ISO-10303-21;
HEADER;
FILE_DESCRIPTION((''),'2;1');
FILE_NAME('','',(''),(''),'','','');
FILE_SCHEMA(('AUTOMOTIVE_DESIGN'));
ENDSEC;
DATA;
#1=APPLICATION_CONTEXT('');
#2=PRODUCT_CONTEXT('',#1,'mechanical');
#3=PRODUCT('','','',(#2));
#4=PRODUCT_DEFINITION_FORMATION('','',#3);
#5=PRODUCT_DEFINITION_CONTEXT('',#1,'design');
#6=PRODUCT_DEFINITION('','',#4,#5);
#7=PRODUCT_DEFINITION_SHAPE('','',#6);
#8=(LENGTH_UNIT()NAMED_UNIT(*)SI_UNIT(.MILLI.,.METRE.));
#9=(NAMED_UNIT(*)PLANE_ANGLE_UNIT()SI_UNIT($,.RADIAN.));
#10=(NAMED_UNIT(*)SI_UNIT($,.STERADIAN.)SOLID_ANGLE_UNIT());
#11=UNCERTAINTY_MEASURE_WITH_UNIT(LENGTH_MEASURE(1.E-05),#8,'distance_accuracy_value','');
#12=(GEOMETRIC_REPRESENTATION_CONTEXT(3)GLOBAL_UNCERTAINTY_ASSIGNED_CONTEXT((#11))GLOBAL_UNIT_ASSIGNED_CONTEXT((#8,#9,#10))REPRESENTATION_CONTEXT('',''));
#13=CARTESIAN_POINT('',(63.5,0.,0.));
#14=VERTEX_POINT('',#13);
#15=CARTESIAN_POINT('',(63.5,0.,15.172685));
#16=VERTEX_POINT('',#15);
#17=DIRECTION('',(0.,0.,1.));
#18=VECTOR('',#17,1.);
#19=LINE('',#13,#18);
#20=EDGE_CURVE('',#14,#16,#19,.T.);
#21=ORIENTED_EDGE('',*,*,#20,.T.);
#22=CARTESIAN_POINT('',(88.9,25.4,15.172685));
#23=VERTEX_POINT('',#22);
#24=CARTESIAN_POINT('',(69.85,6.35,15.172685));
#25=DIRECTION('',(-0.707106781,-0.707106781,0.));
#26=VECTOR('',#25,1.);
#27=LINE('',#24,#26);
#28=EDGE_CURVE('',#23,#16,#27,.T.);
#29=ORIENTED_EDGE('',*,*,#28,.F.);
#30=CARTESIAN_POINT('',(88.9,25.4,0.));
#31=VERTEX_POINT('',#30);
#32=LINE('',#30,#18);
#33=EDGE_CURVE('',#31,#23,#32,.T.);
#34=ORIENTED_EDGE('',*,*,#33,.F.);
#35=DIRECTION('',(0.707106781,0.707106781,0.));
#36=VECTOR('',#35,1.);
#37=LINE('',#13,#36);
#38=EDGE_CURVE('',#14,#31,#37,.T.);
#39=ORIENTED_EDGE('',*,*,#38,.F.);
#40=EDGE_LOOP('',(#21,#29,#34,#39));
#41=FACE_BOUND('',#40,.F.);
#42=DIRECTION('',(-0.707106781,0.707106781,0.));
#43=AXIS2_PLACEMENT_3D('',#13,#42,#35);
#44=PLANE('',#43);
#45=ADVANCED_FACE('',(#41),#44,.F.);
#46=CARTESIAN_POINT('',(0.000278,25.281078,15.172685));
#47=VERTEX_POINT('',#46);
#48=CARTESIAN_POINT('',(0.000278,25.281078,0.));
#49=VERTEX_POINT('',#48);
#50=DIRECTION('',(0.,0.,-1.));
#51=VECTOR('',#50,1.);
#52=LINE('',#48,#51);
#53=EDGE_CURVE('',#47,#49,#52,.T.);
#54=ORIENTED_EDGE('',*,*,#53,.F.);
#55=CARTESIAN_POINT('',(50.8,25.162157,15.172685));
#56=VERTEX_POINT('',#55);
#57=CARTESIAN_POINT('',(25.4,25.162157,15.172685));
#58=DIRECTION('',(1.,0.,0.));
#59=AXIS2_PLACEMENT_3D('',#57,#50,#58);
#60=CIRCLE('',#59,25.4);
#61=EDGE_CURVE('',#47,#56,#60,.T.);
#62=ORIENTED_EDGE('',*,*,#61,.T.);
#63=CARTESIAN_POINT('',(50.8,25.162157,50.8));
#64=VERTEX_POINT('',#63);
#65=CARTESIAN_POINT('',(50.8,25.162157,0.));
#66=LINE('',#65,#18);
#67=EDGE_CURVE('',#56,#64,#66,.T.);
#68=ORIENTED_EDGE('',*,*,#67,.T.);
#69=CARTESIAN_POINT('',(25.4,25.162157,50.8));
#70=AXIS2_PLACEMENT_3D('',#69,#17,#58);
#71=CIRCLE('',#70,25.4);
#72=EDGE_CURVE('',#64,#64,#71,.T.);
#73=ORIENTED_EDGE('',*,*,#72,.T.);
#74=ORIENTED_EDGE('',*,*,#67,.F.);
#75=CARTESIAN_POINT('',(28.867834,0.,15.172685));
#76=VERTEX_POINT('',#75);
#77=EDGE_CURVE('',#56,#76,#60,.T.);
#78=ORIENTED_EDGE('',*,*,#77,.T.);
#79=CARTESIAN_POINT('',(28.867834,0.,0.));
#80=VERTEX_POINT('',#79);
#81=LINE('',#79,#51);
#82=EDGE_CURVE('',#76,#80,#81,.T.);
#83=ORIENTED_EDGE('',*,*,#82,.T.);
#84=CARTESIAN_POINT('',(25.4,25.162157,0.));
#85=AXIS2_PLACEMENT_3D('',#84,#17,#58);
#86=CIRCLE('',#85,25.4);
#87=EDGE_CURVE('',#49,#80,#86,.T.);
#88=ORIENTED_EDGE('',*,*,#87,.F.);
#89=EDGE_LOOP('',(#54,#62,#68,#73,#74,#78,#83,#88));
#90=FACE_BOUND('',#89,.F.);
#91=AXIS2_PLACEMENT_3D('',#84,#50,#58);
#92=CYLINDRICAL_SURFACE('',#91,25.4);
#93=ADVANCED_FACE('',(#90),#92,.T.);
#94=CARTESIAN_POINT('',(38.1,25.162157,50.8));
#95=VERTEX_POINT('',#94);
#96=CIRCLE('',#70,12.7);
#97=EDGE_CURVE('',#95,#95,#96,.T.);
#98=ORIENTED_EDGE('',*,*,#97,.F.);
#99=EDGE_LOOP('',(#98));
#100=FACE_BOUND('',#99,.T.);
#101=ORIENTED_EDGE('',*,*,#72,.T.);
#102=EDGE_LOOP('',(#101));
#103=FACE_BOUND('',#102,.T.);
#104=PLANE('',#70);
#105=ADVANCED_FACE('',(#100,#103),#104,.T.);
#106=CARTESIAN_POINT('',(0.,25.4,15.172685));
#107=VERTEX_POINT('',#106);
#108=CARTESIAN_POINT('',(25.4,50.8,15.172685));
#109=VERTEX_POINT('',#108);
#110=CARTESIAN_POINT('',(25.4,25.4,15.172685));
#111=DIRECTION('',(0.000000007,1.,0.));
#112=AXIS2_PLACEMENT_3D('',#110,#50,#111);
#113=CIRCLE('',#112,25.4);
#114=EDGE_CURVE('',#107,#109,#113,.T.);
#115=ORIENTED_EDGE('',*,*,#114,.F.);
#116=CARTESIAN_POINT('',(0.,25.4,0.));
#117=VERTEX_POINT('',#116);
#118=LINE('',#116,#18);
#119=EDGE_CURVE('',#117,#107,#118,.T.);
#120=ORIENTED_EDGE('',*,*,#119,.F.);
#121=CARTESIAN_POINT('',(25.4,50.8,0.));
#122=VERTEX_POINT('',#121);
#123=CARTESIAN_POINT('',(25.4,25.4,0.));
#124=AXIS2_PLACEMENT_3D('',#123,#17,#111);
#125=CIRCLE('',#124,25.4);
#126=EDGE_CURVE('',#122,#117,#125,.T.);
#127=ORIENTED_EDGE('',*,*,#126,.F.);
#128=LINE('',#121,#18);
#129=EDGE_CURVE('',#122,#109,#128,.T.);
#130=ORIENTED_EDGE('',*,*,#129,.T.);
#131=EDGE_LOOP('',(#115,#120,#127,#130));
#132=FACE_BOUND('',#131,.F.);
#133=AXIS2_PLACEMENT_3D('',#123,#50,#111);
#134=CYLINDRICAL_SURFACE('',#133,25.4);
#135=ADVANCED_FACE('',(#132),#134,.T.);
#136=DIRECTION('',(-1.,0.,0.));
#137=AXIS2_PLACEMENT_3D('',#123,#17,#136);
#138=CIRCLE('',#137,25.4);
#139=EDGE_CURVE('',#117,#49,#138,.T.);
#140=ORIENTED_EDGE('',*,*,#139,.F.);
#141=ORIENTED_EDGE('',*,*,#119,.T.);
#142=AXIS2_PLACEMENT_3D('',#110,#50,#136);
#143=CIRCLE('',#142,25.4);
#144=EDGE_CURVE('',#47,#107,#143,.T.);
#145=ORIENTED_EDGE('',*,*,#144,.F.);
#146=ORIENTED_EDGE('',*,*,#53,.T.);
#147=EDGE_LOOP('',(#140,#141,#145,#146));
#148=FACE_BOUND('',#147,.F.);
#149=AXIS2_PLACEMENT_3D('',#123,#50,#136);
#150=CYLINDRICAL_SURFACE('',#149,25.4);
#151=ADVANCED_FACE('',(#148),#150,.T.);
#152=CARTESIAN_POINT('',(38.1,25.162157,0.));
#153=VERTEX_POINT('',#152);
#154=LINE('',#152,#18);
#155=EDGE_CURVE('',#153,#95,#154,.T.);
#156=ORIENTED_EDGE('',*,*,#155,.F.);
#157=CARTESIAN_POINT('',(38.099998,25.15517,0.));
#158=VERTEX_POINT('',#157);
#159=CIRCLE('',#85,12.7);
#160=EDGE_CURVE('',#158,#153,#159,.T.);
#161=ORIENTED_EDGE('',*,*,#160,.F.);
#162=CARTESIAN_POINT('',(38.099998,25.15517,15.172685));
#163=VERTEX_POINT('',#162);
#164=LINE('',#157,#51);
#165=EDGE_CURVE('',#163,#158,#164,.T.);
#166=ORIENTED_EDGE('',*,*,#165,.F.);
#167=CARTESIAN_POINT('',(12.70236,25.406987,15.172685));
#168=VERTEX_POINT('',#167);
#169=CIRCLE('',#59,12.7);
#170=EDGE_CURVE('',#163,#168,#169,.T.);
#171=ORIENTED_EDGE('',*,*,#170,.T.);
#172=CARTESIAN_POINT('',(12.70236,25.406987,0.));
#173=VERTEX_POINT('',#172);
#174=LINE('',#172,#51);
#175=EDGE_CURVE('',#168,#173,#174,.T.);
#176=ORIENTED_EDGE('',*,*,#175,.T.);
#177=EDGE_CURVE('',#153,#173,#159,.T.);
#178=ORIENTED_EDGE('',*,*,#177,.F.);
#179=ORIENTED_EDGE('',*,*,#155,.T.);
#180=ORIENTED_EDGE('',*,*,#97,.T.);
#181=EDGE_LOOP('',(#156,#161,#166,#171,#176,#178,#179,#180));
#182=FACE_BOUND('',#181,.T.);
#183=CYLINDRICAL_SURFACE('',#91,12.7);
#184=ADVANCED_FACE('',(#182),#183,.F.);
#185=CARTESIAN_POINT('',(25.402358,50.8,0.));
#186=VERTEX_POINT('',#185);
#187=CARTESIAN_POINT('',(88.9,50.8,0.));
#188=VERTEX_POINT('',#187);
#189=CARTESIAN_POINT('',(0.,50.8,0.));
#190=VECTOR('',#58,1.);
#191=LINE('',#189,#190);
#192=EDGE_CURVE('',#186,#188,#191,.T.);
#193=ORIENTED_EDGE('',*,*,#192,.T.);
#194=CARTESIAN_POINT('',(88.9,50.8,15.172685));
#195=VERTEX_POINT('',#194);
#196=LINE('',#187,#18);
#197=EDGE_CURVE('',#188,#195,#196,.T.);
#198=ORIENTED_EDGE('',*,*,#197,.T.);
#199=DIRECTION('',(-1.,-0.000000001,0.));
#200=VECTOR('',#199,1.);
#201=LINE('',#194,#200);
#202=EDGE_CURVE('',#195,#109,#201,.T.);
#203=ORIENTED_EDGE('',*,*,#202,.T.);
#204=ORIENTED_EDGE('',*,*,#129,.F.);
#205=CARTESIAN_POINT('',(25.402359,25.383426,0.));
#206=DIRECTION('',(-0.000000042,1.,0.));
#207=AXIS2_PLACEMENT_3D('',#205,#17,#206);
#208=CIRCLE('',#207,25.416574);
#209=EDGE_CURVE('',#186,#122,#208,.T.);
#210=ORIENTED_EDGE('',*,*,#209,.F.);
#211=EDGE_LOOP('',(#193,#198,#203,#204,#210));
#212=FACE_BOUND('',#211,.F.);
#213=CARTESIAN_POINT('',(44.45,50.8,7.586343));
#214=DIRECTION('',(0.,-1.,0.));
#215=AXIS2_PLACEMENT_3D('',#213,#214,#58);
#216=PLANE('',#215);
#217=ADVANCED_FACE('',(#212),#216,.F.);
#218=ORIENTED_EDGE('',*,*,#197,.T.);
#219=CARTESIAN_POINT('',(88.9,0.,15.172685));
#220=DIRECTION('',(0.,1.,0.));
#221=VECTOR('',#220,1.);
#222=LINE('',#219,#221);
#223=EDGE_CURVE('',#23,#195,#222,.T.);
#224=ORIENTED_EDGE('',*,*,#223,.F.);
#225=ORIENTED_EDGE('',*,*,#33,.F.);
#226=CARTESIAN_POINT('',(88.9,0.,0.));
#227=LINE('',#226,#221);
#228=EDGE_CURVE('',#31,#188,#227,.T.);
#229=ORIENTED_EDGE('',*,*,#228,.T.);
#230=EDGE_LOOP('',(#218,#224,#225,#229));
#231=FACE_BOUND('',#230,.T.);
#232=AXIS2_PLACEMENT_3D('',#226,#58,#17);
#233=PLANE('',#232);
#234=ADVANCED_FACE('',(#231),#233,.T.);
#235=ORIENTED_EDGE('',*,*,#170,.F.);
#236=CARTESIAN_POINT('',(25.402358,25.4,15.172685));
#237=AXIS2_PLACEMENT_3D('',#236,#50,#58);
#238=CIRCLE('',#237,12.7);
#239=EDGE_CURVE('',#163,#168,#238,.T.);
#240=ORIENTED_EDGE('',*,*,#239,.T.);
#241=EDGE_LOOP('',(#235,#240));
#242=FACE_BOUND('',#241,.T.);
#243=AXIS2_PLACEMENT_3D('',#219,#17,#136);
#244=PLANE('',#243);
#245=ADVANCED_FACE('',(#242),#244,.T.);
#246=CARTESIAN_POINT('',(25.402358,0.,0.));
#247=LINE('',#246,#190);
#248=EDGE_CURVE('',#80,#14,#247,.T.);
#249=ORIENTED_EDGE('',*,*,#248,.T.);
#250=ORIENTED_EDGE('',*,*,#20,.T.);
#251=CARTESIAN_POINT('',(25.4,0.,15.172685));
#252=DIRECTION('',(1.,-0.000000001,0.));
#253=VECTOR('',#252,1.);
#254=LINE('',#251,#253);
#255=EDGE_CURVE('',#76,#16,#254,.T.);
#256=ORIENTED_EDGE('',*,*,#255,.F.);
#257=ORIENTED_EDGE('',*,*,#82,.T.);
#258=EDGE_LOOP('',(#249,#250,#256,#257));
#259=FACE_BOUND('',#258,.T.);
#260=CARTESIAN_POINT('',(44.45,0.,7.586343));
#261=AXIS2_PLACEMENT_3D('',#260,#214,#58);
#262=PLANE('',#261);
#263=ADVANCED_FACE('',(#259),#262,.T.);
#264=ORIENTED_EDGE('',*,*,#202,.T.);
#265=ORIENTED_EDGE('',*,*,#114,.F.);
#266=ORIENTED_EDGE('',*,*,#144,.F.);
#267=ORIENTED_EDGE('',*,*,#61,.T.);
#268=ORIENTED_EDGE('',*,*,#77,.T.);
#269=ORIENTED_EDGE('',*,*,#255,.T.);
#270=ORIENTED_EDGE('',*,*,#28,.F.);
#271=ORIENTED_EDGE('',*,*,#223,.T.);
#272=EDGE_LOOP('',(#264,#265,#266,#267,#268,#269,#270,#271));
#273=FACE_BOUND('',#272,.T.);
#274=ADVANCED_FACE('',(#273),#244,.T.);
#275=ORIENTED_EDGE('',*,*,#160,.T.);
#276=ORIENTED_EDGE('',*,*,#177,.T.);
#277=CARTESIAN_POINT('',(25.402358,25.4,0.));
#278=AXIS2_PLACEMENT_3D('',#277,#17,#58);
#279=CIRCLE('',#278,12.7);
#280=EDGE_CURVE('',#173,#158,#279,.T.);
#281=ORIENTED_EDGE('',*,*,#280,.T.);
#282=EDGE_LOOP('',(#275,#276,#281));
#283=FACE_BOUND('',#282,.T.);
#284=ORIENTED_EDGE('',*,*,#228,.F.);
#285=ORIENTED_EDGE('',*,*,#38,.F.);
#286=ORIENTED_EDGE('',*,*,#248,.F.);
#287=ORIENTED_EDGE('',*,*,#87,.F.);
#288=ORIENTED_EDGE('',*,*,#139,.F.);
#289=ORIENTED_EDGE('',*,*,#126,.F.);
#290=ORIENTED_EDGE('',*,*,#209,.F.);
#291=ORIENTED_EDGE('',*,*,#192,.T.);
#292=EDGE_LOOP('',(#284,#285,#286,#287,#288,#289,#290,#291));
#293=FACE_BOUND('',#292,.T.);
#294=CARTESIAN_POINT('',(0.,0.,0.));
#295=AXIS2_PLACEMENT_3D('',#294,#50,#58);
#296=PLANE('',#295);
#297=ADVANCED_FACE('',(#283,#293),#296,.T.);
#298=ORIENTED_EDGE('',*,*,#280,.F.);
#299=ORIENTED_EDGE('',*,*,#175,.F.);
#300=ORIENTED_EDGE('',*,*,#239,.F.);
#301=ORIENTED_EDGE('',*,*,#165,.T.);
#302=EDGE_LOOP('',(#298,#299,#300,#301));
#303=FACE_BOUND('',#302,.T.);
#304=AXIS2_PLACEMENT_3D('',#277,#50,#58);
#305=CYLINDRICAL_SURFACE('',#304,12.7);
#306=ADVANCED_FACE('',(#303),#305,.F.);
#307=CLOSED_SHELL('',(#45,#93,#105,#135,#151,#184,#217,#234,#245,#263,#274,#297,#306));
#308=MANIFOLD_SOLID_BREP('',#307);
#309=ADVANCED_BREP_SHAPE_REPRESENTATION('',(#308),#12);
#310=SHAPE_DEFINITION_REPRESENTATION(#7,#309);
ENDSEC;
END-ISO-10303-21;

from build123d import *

# Parameters (mm, degrees)
F2_DEPTH = 50.8
F1_R     = 12.7
F3_DEPTH = 50.8
F4_R     = 25.4
F4_R_2   = 12.7
F5_DEPTH = 50.8


# Not quite as in the source:
# - ends of sketch curves that miss each other by under 0.0002 mm in the source are joined


with BuildPart() as f2:
    # F0 (on Front) → F2 (new body)
    with BuildSketch(Plane.XZ):
        Polygon((0, 15.1726854965), (0, 0), (88.9, 0), (88.9, 15.1726854965), (38.1, 15.1726854965), align=None)
    extrude(amount=-F2_DEPTH)

    # F1 (on Top) → F3 (intersect)
    with BuildSketch(Plane.XY):
        with BuildLine():
            ThreePointArc((25.4023582082, 0), (43.3628704503, 7.4394877579), (50.8023582082, 25.4))
            ThreePointArc((50.8023582082, 25.4), (50.8017686493, 25.5730584989), (50.8, 25.7461089641))
            ThreePointArc((50.8, 25.7461089641), (43.2400827311, 43.4824661992), (25.4023582082, 50.8))
            ThreePointArc((25.4023582082, 50.8), (25.4011791041, 50.7999999726), (25.4, 50.7999998905))
            ThreePointArc((25.4, 50.7999998905), (0.0023582082, 25.4), (25.4, 1.095e-07))
            ThreePointArc((25.4, 1.095e-07), (25.4011791041, 2.74e-08), (25.4023582082, 0))
        make_face()
        with Locations((25.4023582082, 25.4)):
            Circle(F1_R, mode=Mode.SUBTRACT)
        with BuildLine():
            ThreePointArc((50.8, 25.7461089641), (50.8017686493, 25.5730584989), (50.8023582082, 25.4))
            ThreePointArc((50.8023582082, 25.4), (43.3628704503, 7.4394877579), (25.4023582082, 0))
            Line((25.4023582082, 0), (51.1508577362, 0))
            Line((51.1508577362, 0), (63.5, 0))
            Line((63.5, 0), (88.9, 25.4))
            Line((88.9, 25.4), (88.9, 50.8))
            Line((88.9, 50.8), (50.4585755345, 50.8))
            Line((50.4585755345, 50.8), (25.4023582082, 50.8))
            ThreePointArc((25.4023582082, 50.8), (43.2400827311, 43.4824661992), (50.8, 25.7461089641))
        make_face()
        with BuildLine():
            ThreePointArc((0, 25.4), (7.4394877579, 7.4394877579), (25.4, 0))
            ThreePointArc((25.4, 0), (0.0023582082, 25.4), (25.4, 50.7999998905))
            ThreePointArc((25.4, 50.7999998905), (7.4394877579, 43.3605122421), (0, 25.4))
        make_face()
    extrude(amount=F3_DEPTH, mode=Mode.INTERSECT)

    # F4 (on Top) → F5 (join)
    with BuildSketch(Plane.XY):
        with Locations((25.4, 25.1621566713)):
            Circle(F4_R)
        with Locations((25.4, 25.1621566713)):
            Circle(F4_R_2, mode=Mode.SUBTRACT)
    extrude(amount=F5_DEPTH)


solid = f2.part
